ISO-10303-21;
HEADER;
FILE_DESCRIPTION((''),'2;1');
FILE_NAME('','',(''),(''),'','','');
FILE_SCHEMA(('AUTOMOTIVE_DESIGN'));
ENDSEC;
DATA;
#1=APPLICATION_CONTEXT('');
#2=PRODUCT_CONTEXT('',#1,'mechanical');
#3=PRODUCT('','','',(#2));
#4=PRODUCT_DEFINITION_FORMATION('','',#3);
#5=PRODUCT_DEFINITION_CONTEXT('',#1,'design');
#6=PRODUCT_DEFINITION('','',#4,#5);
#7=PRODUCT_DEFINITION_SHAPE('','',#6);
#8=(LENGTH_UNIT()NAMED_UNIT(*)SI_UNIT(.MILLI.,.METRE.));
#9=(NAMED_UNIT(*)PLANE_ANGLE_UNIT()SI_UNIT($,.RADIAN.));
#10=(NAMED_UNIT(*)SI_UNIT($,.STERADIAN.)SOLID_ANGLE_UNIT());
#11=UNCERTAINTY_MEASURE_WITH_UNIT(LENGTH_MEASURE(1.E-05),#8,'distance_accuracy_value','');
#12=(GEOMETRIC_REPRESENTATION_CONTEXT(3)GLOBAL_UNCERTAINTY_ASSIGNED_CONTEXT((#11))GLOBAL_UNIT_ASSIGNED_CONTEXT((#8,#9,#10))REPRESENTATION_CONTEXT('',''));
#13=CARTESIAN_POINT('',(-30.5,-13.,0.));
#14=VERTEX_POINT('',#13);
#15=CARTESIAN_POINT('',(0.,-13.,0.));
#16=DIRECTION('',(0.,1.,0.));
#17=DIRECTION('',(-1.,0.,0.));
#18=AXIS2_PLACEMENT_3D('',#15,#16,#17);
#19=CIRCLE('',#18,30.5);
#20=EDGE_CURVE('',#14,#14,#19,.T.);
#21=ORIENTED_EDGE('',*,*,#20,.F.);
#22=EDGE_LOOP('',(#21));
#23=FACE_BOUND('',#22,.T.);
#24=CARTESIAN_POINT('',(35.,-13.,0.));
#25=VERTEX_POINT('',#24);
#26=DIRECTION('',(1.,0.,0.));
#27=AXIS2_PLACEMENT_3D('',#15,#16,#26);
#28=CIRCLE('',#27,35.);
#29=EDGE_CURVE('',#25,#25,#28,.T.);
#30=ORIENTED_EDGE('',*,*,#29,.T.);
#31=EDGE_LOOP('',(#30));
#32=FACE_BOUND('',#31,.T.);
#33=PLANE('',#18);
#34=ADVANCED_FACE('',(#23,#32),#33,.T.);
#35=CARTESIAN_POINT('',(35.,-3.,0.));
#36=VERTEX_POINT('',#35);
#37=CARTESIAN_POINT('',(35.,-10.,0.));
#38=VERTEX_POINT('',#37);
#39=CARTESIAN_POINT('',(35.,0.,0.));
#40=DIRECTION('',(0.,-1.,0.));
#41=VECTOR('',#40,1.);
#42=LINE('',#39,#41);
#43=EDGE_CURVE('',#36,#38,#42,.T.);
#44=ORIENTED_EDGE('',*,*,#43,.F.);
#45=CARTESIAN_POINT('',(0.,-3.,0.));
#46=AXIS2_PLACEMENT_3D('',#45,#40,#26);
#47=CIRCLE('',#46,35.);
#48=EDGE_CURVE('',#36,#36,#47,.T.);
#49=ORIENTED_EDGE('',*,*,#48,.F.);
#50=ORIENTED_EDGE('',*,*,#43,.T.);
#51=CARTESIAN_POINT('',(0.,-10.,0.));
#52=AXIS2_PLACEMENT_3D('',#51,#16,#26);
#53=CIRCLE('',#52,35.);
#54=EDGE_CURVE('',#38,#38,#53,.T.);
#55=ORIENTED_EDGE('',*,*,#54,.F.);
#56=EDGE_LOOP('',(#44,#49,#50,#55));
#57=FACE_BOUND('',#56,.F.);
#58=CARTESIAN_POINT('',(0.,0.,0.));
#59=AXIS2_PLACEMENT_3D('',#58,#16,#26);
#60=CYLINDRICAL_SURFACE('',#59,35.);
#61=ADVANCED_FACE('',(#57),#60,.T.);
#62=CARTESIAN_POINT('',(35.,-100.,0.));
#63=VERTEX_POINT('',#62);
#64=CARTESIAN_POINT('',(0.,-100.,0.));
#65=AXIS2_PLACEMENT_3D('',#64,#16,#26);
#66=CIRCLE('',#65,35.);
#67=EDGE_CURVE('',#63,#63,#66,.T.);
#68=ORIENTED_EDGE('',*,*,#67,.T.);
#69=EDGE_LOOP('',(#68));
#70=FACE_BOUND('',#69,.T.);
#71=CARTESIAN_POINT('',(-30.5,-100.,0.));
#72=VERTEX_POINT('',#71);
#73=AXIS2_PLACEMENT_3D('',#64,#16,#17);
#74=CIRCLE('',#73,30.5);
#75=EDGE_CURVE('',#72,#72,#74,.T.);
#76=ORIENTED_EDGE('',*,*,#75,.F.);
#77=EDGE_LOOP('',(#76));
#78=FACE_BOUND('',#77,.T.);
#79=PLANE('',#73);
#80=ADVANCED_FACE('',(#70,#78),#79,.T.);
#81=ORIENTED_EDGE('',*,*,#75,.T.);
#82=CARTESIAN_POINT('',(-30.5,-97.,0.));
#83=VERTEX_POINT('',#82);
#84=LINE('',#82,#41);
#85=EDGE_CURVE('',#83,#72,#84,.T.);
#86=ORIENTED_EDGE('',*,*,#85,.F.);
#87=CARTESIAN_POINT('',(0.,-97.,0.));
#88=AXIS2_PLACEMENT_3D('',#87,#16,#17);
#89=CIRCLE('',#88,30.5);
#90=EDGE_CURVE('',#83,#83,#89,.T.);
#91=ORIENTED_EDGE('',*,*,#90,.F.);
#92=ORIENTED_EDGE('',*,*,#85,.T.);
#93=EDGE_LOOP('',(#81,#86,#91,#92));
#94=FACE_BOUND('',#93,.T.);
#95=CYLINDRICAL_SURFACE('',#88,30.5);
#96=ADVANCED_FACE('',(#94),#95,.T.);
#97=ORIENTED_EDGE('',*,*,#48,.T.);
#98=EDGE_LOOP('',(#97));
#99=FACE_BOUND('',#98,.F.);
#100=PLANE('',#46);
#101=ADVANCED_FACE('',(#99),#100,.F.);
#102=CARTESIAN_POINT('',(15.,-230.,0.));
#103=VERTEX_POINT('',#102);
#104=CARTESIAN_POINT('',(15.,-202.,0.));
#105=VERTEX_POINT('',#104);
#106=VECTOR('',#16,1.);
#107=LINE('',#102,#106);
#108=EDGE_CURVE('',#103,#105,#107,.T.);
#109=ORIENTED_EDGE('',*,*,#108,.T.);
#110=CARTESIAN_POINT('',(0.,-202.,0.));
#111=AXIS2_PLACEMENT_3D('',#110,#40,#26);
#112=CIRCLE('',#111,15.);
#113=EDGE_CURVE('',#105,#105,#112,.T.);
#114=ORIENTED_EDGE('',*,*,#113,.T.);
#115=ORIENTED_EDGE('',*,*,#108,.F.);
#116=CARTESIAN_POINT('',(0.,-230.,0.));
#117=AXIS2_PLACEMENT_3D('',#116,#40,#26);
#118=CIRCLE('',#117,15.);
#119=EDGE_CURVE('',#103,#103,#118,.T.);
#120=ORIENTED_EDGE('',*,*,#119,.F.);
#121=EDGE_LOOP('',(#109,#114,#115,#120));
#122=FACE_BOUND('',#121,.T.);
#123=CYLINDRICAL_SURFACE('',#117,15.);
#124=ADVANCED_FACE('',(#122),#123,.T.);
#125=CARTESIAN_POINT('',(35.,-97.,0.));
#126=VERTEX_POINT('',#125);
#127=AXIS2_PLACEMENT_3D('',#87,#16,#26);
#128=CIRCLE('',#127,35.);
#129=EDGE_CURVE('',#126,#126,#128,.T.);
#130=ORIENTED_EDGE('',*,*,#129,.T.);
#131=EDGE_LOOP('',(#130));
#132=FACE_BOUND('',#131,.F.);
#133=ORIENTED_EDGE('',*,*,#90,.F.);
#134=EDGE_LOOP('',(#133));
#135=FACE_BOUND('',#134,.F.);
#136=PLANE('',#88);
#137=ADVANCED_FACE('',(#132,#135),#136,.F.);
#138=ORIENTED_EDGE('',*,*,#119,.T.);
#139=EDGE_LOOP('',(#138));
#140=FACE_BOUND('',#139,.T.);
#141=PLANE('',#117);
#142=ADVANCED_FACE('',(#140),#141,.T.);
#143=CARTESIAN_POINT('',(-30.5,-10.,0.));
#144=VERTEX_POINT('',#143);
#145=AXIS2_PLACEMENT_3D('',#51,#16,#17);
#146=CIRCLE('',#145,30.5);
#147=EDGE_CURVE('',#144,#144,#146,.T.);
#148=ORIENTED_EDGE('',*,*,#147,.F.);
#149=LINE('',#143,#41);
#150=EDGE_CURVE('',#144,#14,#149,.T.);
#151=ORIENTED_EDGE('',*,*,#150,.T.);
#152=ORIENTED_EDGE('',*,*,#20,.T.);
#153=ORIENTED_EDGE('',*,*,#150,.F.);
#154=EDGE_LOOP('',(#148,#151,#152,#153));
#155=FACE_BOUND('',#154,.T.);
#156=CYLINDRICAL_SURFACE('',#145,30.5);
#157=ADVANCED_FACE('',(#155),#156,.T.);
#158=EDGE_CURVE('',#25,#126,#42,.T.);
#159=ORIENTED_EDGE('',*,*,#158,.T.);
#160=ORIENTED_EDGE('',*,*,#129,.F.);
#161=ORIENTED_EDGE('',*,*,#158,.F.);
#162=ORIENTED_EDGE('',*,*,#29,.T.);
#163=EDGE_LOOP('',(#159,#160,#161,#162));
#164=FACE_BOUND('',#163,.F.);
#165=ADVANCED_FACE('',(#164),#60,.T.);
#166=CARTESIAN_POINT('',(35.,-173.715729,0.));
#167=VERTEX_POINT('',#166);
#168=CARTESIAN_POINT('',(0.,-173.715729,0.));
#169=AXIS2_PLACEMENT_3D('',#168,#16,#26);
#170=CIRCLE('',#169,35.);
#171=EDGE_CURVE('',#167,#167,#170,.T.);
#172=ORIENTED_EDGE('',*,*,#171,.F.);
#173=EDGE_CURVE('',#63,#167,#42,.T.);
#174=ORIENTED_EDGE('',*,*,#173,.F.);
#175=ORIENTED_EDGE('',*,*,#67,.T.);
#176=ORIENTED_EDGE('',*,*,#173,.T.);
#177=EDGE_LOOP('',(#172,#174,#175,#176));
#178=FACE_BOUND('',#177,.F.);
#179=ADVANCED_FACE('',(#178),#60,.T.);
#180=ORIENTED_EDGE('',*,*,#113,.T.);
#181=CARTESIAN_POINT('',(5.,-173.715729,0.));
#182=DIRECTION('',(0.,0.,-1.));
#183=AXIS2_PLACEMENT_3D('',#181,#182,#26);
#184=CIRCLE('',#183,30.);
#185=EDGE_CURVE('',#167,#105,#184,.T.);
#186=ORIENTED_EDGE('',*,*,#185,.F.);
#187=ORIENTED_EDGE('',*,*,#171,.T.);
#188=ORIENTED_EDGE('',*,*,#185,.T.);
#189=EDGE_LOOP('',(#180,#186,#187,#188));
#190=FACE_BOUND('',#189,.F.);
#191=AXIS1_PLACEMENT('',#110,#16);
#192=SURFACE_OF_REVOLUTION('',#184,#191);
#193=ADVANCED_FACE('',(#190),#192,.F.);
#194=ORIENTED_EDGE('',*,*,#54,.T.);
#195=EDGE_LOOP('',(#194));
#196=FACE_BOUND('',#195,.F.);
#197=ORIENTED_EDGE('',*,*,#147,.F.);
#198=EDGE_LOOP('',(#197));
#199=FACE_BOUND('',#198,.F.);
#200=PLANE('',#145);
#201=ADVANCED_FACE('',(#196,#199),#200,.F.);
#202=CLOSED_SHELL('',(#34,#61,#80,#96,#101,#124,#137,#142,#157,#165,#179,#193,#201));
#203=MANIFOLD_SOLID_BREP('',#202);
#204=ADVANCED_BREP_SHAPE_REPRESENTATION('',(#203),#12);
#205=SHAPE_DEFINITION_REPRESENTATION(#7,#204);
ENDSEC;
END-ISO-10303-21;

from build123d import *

# Parameters (mm, degrees)
F0_R     = 35
F1_DEPTH = 230
F3_R     = 40.5
F3_R_2   = 30.5
F4_DEPTH = 3
F6_R     = 36.6776
F6_R_2   = 30.5
F7_DEPTH = 3
F8_R     = 38.3794
F8_R_2   = 15
F9_DEPTH = 28


# Not quite as in the source:
# - a fillet or chamfer that OpenCascade refuses, or shapes differently, is made with other operations: its cross-section is extruded or revolved along the edge and cut away or added


with BuildPart() as f1:
    # F0 (on Front) → F1 (new body)
    with BuildSketch(Plane.XZ):
        Circle(F0_R)
    extrude(amount=F1_DEPTH)

    # F3 (on offset) + F0 (on Front) → F4 (cut)
    with BuildSketch(Plane(origin=(0, -10, 0), x_dir=(-1, 0, 0), z_dir=(0, 1, 0))):
        Circle(F3_R)
        Circle(F3_R_2, mode=Mode.SUBTRACT)
    with BuildSketch(Plane.XZ):
        Circle(F0_R)
    extrude(amount=-F4_DEPTH, dir=(0, 1, 0), mode=Mode.SUBTRACT)

    # F6 (on offset) → F7 (cut)
    with BuildSketch(Plane(origin=(0, -97, 0), x_dir=(-1, 0, 0), z_dir=(0, 1, 0))):
        Circle(F6_R)
        Circle(F6_R_2, mode=Mode.SUBTRACT)
    extrude(amount=-F7_DEPTH, mode=Mode.SUBTRACT)

    # F8 (on face) → F9 (cut)
    with BuildSketch(Plane.XZ.offset(230)):
        Circle(F8_R)
        Circle(F8_R_2, mode=Mode.SUBTRACT)
    extrude(amount=-F9_DEPTH, mode=Mode.SUBTRACT)

    # F10: fillet of radius 30 on 1 edges, made by hand

    # F10_s1 → F10_t2 (revolve, cut)
    with BuildSketch(Plane.XY):
        with BuildLine():
            ThreePointArc((35, -173.7157287525), (29.4948974278, -191.0362368282), (15, -202))
            Line((15, -202), (35, -202))
            Line((35, -202), (35, -173.7157287525))
        make_face()
    revolve(axis=Axis((0, -202, 0), (0, 1, 0)), mode=Mode.SUBTRACT)


solid = f1.part
